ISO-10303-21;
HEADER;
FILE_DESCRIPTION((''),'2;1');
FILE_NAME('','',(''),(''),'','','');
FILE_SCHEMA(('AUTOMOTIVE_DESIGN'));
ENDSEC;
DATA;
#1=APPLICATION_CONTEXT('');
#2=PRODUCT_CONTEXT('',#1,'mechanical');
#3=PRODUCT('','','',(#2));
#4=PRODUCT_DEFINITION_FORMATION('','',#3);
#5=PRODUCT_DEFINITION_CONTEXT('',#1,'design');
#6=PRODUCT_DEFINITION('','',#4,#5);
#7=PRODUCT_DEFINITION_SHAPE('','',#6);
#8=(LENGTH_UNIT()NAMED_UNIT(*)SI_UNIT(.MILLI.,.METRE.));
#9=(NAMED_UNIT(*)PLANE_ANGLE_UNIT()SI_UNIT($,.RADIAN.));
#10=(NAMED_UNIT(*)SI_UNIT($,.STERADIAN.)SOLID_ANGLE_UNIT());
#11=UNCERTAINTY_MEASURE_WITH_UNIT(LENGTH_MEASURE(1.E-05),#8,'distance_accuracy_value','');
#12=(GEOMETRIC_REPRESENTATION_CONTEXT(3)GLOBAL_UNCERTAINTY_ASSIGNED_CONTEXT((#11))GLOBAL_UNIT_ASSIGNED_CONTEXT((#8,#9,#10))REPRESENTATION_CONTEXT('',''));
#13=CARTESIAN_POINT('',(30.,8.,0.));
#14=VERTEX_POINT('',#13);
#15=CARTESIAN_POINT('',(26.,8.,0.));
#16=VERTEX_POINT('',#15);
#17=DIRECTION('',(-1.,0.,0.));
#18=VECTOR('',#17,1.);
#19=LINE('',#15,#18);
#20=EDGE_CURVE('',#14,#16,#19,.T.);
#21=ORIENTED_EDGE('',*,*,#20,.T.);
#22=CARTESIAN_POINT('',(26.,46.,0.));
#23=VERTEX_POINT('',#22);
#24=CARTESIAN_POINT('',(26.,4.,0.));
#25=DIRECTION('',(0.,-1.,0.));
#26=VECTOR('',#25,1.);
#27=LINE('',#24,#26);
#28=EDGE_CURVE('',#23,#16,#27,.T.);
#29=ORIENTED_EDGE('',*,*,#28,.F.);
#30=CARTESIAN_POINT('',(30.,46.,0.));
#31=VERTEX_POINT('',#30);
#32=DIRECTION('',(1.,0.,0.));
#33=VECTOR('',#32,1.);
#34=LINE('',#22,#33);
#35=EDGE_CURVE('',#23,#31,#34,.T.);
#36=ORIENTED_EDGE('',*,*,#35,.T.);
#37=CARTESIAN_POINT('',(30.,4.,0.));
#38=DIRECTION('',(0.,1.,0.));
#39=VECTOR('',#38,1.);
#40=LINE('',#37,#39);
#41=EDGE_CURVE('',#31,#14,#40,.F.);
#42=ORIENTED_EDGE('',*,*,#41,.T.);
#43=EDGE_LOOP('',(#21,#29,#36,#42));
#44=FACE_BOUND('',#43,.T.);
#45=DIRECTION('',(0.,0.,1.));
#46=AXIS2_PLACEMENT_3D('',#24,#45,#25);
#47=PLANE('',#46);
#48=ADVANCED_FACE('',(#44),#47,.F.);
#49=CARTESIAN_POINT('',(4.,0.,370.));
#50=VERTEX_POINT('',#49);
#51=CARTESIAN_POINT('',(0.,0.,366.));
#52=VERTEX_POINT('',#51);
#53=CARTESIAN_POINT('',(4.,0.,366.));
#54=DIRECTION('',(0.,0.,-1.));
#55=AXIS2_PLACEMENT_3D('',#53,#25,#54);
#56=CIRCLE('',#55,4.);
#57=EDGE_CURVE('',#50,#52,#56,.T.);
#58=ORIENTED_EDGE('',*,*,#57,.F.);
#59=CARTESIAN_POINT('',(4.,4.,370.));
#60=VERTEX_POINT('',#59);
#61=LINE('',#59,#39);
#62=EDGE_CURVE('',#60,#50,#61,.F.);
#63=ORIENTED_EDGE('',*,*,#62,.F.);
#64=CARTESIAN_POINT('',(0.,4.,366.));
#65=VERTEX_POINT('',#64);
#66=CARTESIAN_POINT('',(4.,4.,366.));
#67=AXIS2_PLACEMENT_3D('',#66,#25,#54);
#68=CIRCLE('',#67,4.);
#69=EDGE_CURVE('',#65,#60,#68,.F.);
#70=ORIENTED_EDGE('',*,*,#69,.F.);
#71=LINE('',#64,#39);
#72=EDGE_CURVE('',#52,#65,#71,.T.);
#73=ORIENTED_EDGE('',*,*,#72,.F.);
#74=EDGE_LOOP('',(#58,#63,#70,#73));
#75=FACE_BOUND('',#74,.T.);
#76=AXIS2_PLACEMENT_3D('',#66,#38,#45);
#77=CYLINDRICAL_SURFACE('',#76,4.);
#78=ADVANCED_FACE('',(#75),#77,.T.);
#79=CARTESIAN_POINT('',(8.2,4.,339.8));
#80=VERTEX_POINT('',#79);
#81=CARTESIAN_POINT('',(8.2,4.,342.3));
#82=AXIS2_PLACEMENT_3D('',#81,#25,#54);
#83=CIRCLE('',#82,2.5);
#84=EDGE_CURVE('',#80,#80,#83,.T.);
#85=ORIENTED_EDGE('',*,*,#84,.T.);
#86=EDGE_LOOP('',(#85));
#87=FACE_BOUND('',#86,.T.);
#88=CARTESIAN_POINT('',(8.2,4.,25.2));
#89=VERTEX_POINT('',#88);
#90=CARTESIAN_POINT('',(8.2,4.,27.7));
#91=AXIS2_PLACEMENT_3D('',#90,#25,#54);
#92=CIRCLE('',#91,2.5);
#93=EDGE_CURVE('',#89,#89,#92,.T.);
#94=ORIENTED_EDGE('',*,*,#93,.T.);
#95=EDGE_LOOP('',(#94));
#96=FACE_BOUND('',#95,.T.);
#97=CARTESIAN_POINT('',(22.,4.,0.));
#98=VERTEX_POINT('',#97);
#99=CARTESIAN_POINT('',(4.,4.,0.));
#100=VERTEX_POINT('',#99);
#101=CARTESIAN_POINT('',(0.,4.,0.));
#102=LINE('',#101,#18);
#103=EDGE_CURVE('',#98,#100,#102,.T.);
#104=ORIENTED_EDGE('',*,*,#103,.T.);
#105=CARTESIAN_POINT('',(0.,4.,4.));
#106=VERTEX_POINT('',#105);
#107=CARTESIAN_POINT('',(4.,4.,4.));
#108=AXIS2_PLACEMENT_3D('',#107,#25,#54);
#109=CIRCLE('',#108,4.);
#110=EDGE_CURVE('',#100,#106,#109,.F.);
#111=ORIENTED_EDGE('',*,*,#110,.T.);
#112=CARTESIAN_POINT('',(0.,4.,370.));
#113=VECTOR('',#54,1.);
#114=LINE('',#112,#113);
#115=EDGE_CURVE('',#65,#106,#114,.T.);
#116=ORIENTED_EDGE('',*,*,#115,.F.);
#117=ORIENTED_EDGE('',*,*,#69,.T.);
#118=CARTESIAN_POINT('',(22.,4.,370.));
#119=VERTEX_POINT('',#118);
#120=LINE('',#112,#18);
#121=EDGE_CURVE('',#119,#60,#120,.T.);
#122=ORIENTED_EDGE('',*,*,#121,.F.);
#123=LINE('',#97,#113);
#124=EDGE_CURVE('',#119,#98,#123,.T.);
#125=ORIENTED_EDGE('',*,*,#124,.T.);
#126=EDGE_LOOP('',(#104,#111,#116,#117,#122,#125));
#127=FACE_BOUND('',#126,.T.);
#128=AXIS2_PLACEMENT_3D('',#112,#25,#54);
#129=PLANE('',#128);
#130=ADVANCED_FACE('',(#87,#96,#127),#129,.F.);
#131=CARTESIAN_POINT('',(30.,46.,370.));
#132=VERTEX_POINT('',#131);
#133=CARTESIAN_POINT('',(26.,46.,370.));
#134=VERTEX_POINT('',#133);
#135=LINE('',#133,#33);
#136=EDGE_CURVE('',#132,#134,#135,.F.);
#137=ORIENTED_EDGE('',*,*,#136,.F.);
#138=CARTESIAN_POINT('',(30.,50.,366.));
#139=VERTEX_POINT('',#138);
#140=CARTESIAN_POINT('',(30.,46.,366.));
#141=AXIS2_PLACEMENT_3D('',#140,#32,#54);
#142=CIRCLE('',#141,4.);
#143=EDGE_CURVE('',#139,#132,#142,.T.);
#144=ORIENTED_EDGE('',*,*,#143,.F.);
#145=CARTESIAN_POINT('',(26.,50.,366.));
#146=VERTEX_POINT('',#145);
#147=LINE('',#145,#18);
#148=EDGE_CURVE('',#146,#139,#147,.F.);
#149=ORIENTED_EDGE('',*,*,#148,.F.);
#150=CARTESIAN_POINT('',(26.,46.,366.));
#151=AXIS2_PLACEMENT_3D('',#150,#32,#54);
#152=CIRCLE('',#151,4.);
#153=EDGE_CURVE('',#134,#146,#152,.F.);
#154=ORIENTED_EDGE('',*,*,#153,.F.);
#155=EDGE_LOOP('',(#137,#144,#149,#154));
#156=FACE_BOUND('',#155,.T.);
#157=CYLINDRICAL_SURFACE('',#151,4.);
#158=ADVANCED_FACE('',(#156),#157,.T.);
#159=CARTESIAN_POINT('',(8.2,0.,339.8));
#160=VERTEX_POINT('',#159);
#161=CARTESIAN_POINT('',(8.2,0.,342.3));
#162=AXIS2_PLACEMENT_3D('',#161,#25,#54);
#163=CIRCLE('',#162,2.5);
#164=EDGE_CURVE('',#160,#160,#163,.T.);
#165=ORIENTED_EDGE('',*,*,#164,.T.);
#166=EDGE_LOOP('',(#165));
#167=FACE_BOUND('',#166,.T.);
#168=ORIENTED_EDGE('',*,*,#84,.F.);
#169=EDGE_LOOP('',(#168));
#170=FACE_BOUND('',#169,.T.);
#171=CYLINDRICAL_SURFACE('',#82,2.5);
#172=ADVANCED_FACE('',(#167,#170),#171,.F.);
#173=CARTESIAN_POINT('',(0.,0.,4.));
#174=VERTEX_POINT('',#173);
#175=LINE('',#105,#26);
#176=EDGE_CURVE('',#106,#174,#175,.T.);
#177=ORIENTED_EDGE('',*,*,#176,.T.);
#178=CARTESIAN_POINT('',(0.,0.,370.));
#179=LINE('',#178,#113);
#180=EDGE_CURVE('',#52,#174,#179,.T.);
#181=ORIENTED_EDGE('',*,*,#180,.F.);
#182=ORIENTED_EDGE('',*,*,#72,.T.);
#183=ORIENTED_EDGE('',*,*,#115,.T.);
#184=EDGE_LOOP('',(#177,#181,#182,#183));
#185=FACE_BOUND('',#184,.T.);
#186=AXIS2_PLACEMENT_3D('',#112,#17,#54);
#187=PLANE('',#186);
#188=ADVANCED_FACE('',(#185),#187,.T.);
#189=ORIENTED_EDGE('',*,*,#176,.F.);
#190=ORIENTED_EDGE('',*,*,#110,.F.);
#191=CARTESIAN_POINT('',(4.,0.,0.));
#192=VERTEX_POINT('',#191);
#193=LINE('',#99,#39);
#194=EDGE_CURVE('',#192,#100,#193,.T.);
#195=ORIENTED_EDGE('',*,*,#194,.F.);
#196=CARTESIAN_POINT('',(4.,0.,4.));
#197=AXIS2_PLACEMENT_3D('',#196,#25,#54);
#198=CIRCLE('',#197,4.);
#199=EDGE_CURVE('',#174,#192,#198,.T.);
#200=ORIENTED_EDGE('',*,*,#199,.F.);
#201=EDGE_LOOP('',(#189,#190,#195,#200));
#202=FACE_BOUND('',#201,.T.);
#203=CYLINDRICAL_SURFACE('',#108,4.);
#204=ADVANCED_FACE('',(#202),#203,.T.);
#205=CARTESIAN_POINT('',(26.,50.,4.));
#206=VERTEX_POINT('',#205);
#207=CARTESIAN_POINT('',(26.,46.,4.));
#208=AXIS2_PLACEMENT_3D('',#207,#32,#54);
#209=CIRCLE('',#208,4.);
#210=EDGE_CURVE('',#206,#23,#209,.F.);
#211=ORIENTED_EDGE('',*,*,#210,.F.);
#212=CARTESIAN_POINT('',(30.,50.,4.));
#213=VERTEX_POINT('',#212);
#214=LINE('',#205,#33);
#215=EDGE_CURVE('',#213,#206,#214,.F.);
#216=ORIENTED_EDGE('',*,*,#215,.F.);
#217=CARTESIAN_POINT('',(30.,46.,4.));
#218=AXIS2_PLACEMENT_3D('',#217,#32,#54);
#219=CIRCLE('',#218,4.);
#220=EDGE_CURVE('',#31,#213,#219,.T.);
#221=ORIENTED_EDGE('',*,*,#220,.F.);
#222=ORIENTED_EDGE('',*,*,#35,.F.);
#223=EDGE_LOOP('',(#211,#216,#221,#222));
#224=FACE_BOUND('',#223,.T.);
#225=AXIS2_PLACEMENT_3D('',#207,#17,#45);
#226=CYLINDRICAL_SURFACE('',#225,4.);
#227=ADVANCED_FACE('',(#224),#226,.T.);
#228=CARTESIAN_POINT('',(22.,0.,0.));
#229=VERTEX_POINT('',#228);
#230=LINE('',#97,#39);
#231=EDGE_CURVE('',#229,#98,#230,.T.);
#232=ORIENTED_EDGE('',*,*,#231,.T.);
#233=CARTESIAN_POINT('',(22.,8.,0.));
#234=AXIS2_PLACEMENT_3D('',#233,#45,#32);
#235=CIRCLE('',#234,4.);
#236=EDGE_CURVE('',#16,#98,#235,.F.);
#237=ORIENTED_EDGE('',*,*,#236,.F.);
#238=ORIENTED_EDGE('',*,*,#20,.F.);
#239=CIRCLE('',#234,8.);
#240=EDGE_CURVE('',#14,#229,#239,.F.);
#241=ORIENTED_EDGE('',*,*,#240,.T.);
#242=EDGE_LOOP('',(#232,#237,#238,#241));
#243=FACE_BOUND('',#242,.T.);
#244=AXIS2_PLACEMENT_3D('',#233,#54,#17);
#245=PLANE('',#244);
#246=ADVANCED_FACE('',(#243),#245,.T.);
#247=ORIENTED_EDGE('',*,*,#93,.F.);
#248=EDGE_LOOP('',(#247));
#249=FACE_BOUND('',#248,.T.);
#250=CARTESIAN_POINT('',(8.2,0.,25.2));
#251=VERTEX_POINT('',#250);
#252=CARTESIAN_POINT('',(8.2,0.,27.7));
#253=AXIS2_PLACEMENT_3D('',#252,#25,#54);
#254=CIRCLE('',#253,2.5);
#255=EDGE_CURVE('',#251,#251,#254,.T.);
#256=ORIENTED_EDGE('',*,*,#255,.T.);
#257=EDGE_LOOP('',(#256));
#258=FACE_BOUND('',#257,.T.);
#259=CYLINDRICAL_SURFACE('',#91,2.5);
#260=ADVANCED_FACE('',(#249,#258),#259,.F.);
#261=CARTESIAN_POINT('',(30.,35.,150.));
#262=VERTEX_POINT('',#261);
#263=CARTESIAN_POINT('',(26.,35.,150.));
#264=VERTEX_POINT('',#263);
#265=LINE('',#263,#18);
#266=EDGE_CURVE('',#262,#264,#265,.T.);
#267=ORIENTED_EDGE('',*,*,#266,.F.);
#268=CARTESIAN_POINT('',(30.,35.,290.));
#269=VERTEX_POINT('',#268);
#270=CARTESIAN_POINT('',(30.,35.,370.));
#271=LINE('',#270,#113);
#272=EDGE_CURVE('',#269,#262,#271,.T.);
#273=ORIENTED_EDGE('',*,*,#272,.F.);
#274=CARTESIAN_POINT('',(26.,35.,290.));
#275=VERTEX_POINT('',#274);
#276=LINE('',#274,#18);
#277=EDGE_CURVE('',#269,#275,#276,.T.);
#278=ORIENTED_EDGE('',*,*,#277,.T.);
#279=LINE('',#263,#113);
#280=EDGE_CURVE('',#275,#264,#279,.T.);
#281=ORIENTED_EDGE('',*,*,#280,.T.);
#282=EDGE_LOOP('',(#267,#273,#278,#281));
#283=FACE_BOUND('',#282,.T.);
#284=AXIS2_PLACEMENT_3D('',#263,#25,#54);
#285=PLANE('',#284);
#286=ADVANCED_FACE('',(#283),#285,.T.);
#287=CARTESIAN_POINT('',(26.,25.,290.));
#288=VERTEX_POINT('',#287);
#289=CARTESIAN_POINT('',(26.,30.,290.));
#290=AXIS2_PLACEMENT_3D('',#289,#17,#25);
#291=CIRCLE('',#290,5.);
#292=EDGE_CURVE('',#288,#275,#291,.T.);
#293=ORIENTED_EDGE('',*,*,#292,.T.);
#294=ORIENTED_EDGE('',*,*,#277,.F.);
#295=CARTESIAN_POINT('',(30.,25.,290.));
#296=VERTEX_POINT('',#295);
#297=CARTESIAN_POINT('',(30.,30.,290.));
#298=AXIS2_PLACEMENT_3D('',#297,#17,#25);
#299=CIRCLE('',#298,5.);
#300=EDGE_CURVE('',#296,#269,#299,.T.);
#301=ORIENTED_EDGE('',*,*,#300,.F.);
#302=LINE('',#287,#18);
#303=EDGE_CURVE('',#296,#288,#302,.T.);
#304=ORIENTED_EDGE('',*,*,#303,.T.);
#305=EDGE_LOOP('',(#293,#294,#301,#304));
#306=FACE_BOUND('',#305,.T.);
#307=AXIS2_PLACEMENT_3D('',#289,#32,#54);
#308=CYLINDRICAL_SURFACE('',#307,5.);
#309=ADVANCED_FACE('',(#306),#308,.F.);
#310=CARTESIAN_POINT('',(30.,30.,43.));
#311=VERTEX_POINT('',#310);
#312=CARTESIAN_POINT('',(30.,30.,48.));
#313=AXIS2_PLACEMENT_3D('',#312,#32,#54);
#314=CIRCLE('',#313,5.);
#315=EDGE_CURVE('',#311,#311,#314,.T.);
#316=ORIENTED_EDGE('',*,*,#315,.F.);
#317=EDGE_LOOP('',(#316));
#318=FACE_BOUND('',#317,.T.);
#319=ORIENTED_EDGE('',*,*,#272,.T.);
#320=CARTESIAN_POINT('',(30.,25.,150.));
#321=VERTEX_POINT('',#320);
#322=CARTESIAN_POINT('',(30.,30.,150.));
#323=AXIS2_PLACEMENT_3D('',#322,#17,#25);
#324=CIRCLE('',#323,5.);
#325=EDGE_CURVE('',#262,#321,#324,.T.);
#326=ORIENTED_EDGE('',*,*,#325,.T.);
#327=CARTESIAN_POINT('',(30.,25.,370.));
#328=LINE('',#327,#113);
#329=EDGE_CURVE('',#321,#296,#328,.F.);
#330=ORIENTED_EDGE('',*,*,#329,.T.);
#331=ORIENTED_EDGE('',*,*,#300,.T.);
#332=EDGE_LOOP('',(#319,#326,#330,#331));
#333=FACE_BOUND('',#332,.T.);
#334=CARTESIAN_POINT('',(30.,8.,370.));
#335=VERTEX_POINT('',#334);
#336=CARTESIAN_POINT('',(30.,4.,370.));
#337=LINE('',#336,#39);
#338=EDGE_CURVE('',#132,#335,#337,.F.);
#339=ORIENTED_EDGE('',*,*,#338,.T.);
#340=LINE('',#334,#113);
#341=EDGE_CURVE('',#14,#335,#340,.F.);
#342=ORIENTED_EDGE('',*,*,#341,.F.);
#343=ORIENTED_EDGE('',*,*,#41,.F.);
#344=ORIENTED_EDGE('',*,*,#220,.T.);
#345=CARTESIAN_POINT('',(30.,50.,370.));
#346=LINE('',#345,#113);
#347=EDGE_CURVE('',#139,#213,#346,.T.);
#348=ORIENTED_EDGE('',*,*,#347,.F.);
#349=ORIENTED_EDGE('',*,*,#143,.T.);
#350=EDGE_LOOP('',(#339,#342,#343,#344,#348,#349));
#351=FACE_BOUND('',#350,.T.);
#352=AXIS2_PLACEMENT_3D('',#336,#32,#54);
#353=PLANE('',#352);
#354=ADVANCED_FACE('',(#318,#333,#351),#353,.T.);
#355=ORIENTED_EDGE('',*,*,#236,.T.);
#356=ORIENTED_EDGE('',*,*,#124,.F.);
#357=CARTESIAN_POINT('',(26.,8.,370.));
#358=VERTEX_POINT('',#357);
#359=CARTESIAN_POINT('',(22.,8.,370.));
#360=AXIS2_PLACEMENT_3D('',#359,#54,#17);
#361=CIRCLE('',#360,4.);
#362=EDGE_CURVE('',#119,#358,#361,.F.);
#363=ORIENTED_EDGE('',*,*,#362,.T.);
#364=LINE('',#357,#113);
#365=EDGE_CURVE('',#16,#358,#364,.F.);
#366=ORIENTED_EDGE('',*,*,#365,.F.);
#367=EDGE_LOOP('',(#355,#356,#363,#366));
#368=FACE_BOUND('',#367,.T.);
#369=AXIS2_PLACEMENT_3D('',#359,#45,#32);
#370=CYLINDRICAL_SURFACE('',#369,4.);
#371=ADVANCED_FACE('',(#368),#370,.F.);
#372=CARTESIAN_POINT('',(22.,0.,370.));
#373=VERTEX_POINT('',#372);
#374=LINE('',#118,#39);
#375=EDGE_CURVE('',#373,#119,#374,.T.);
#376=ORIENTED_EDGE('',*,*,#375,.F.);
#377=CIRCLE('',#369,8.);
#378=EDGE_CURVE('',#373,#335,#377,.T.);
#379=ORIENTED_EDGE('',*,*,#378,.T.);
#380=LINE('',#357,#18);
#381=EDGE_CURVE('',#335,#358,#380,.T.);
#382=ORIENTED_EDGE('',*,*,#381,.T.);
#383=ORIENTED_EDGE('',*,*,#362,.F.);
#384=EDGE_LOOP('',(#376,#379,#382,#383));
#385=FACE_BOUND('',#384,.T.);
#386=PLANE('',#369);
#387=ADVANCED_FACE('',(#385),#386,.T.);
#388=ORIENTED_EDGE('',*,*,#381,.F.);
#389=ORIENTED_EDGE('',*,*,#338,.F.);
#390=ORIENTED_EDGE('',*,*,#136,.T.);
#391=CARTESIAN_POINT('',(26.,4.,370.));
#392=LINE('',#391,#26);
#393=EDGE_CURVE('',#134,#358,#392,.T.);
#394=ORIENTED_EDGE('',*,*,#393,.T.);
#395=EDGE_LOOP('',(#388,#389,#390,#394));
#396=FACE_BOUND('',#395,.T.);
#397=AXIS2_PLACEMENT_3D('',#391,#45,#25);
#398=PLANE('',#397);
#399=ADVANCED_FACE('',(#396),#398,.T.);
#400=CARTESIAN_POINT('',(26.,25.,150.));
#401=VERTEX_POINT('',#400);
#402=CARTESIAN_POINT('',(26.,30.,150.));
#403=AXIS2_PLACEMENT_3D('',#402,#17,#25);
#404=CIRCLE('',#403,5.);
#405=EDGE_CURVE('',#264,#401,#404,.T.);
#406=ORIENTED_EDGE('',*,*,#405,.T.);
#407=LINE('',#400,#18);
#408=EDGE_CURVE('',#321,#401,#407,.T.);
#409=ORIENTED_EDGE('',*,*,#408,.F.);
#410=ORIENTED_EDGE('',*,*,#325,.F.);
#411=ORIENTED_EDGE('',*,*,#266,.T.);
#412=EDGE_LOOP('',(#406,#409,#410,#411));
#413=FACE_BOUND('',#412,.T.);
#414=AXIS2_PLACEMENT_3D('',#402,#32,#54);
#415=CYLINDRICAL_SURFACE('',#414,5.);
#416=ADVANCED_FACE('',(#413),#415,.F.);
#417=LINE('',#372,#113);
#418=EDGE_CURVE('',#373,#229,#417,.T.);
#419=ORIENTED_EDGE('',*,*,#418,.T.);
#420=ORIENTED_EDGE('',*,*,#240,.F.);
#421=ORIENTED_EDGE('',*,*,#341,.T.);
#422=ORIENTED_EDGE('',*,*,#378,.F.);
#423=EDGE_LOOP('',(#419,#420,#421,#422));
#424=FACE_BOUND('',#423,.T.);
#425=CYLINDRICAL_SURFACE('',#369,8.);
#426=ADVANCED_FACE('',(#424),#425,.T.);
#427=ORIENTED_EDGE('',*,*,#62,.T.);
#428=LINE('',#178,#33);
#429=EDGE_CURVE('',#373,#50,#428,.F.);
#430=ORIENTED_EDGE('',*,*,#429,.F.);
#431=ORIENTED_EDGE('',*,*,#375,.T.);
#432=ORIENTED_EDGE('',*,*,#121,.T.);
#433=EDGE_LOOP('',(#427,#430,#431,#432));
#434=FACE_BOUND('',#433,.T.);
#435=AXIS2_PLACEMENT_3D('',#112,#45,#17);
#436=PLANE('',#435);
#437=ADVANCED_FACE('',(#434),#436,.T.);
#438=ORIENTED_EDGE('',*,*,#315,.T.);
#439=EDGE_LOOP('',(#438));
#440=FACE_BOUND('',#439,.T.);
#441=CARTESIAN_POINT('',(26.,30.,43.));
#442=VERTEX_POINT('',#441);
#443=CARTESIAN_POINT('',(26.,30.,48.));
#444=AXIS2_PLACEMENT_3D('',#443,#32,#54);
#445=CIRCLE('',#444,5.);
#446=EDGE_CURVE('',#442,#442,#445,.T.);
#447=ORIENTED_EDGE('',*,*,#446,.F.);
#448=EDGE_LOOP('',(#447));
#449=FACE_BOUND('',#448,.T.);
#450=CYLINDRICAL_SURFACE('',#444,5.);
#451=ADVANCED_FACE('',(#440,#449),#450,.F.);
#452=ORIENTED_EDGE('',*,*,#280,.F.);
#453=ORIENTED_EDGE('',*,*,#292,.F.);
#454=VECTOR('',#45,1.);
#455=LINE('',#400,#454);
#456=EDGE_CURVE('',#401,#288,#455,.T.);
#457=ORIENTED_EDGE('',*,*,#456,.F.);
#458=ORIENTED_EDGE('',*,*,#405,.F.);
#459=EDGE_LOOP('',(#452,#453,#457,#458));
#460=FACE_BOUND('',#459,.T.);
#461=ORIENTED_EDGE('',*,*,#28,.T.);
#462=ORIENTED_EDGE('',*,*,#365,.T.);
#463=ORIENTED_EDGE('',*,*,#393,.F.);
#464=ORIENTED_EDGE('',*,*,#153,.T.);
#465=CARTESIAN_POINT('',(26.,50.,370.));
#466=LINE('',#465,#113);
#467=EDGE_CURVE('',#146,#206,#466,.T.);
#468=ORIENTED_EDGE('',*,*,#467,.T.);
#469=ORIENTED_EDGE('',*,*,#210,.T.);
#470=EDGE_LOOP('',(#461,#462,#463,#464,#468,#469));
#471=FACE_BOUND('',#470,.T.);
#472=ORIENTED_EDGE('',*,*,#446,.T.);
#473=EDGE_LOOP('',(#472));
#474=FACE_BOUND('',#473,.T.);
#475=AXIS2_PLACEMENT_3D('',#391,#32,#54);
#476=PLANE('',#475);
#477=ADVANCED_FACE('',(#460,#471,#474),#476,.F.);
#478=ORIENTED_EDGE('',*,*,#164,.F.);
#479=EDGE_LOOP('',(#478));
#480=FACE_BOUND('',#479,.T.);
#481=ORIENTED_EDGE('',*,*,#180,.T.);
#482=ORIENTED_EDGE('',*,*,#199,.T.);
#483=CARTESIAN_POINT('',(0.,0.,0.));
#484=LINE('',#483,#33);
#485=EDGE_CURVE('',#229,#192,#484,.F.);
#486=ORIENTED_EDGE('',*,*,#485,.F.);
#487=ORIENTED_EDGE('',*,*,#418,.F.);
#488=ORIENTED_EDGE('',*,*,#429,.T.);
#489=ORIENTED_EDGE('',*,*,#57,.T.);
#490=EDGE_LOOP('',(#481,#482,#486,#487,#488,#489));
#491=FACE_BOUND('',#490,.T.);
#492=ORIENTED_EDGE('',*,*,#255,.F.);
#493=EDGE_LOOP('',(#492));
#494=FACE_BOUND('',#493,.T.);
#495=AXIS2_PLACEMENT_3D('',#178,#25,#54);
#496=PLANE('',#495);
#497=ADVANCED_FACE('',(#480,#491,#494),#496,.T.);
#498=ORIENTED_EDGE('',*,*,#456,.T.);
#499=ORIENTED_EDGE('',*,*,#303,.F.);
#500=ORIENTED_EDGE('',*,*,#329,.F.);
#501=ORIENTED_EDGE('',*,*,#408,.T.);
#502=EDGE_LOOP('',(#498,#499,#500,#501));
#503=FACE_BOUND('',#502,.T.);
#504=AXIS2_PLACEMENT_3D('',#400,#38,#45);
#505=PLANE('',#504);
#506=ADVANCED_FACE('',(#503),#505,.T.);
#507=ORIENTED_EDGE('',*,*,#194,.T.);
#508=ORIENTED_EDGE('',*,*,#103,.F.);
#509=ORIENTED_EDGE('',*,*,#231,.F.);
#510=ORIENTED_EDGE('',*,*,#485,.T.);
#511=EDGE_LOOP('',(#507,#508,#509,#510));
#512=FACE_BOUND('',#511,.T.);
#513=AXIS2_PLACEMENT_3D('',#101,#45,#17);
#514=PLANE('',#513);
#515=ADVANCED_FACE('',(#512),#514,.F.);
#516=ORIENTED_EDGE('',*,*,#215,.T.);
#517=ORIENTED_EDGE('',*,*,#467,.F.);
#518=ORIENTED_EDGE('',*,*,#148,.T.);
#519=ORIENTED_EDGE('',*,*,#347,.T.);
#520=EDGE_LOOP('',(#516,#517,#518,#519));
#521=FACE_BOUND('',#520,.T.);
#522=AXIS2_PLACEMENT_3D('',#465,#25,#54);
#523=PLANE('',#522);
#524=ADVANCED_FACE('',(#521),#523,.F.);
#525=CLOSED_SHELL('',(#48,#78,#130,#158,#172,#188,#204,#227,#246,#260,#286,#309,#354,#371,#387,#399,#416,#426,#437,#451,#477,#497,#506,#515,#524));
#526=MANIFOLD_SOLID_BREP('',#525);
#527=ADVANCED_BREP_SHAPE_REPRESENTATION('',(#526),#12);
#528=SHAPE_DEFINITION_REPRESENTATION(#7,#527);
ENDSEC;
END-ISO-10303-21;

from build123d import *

# Parameters (mm, degrees)
BOSS_EXTRUDE1_DEPTH    = 370
CUT_EXTRUDE1_REACH     = 376.267
SKETCH4_R              = 5
CUT_EXTRUDE2_DEPTH     = 375.566416007
SKETCH5_R              = 2.5
CUT_EXTRUDE3_DEPTH     = 375.566416007
SKETCH6_R              = 2.5
CUT_EXTRUDE4_DEPTH     = 375.566416007
CONVERT_SOLID1_DEPTH   = 370
CONVERT_SOLID1_2_DEPTH = 370
FILLET1_R              = 4


# Read off the part's stored shape, not the designer's step: Convert-Solid1
with BuildPart() as part:
    # Sketch1 → Boss-Extrude1 (new body)
    with BuildSketch(Plane.XY):
        Polygon((0, 0), (0, 4), (26, 4), (26, 50), (30, 50), (30, 0), align=None)
    extrude(amount=BOSS_EXTRUDE1_DEPTH)

    # Sketch3 → Cut-Extrude1 (cut, up to next)
    with BuildSketch(Plane.ZY.offset(-26), mode=Mode.PRIVATE) as cut_extrude1_sk1:
        with BuildLine():
            Line((150, 35), (290, 35))
            ThreePointArc((290, 35), (295, 30), (290, 25))
            Line((290, 25), (150, 25))
            ThreePointArc((150, 25), (145, 30), (150, 35))
        make_face()
    cut_extrude1_tool1 = extrude(cut_extrude1_sk1.sketch, amount=-CUT_EXTRUDE1_REACH, mode=Mode.PRIVATE) & part.part
    add(cut_extrude1_tool1.solids().sort_by_distance((26, 30, 220))[0], mode=Mode.SUBTRACT)

    # Sketch4 → Cut-Extrude2 (cut, through all)
    with BuildSketch(Plane(origin=(30, 0, 0), x_dir=(0, 0, -1), z_dir=(1, 0, 0))):
        with Locations(Location((-48, 30, 0), (0, 0, 90))):
            Circle(SKETCH4_R)
    extrude(amount=-CUT_EXTRUDE2_DEPTH, mode=Mode.SUBTRACT)

    # Sketch5 → Cut-Extrude3 (cut, through all)
    with BuildSketch(Plane.XZ):
        with Locations((8.2, 27.7)):
            Circle(SKETCH5_R)
    extrude(amount=-CUT_EXTRUDE3_DEPTH, mode=Mode.SUBTRACT)

    # Sketch6 → Cut-Extrude4 (cut, through all)
    with BuildSketch(Plane.XZ):
        with Locations((8.2, 342.3)):
            Circle(SKETCH6_R)
    extrude(amount=-CUT_EXTRUDE4_DEPTH, mode=Mode.SUBTRACT)

    # Convert-Solid1 outline → Convert-Solid1 (cut)
    with BuildSketch(Plane.XY):
        with BuildLine():
            ThreePointArc((30, 8), (27.656854249, 2.343145751), (22, 0))
            Line((22, 0), (30, 0))
            Line((30, 0), (30, 8))
        make_face()
    extrude(amount=CONVERT_SOLID1_DEPTH, mode=Mode.SUBTRACT)

    # Convert-Solid1 2 outline → Convert-Solid1 2 (add)
    with BuildSketch(Plane.XY):
        with BuildLine():
            ThreePointArc((26, 8), (24.828427125, 5.171572875), (22, 4))
            Line((22, 4), (26, 4))
            Line((26, 4), (26, 8))
        make_face()
    extrude(amount=CONVERT_SOLID1_2_DEPTH)

    # Fillet1
    fillet1_edges = [part.edges().sort_by_distance(p)[0] for p in [
        (28, 50, 0),
        (28, 50, 370),
        (0, 2, 370),
        (0, 2, 0),
    ]]
    fillet(fillet1_edges, radius=FILLET1_R)


solid = part.part
